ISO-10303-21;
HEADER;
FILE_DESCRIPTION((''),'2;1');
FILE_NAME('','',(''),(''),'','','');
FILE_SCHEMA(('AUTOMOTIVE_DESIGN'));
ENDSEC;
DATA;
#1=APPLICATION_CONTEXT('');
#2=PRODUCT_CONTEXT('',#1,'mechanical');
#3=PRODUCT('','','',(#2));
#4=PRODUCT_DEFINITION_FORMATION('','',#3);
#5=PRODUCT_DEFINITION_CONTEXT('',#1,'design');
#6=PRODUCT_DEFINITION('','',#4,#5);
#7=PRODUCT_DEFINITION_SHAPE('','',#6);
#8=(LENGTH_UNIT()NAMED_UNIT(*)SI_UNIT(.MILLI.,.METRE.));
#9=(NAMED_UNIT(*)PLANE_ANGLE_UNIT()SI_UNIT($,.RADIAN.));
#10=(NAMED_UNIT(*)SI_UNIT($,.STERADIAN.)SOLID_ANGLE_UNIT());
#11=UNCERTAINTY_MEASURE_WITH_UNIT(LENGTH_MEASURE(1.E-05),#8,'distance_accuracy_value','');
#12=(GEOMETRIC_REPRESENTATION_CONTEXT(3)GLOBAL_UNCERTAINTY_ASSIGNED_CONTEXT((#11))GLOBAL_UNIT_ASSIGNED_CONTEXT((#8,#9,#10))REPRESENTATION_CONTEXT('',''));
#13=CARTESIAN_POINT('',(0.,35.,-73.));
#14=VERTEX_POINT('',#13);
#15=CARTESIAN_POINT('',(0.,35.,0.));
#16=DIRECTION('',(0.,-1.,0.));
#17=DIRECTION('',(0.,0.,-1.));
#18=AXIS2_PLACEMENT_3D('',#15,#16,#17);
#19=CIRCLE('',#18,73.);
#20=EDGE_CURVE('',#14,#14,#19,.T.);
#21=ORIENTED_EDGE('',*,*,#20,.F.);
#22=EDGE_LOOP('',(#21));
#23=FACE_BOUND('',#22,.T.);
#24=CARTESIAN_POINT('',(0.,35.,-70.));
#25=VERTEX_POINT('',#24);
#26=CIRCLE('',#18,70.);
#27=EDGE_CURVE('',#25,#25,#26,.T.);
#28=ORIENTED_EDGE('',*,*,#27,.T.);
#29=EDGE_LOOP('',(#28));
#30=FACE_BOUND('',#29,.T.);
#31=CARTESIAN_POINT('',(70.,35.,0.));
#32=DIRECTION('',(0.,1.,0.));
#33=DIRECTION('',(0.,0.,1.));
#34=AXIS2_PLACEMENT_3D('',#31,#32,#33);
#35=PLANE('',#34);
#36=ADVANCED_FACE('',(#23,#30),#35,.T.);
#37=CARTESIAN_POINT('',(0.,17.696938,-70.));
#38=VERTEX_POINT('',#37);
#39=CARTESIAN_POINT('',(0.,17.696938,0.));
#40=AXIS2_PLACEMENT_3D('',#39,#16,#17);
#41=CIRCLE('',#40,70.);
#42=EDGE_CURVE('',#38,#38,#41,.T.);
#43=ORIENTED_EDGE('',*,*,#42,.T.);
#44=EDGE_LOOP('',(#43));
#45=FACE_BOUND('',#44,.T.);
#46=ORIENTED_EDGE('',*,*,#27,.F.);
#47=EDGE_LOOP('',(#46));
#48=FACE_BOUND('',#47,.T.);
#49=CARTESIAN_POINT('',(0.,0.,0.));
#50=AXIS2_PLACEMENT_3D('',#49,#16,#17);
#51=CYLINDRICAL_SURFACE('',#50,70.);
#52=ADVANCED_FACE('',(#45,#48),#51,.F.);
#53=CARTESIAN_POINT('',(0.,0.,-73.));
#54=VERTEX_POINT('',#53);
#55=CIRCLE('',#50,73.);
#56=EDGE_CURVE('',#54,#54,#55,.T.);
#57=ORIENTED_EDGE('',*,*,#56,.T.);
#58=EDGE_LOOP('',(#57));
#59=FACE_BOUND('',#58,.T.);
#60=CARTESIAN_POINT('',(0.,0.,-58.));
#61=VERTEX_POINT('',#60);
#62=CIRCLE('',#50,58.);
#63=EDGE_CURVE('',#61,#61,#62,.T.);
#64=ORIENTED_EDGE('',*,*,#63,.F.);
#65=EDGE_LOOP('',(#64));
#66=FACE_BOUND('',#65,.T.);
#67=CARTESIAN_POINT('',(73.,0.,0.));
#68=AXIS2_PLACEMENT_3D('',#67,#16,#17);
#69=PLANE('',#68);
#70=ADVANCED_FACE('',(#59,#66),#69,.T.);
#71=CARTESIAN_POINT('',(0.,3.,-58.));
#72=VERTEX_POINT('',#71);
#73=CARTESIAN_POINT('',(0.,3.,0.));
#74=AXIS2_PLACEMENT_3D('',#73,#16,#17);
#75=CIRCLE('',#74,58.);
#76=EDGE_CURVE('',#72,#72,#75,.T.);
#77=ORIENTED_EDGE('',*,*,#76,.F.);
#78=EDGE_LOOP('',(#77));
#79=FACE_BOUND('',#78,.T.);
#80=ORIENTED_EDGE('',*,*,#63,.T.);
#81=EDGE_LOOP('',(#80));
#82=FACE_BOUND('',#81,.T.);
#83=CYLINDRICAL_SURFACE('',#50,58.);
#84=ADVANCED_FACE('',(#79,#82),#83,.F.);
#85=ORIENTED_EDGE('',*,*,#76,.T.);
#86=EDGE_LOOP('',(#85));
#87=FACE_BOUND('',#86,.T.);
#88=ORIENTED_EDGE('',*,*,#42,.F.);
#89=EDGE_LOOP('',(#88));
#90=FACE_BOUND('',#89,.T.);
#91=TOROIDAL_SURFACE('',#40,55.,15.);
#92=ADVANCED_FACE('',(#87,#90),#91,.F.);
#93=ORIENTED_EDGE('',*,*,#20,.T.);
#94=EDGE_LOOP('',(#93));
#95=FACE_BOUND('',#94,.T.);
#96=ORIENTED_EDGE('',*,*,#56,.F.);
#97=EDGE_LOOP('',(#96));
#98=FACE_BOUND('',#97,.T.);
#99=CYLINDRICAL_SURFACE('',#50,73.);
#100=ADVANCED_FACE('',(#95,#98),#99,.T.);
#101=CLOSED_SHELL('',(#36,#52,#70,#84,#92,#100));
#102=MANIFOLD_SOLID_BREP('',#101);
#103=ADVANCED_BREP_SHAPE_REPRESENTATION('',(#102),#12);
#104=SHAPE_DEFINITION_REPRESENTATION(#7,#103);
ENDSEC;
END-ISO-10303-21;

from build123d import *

# Parameters (mm, degrees)
FILLET1_R = 15


with BuildPart() as part:
    # Sketch1 → Revolve1 (revolve)
    with BuildSketch(Plane.XY, mode=Mode.PRIVATE) as revolve1_sk:
        Polygon((73, 35), (73, 0), (58, 0), (58, 3), (70, 3), (70, 35), align=None)
    revolve(revolve1_sk.sketch.rotate(Axis((0, 0, 0), (0, 1, 0)), 90), axis=Axis((0, 0, 0), (0, 1, 0)))

    # Fillet1
    # the kernel refuses this fillet: 15 mm, written as the material it adds along each edge
    with BuildSketch(Plane(origin=(0, 3, 0), x_dir=(0, 0, -1), z_dir=(1, 0, 0))) as fillet1_piece_1:
        with BuildLine():
            CenterArc((55, 14.696938457), FILLET1_R, 281.536959033, 78.463040967)
            Line((70, 14.696938457), (70.3, 14.696938457))
            Line((70.3, 14.696938457), (70.3, 0))
            Line((70.3, 0), (70, -0.3))
            ThreePointArc((70, -0.3), (64, -0.3), (58.06, -0.293938769))
            Line((58.06, -0.293938769), (58, 0))
        make_face()
    revolve(axis=Axis((0, 3, 0), (0, 1, 0)))


solid = part.part
